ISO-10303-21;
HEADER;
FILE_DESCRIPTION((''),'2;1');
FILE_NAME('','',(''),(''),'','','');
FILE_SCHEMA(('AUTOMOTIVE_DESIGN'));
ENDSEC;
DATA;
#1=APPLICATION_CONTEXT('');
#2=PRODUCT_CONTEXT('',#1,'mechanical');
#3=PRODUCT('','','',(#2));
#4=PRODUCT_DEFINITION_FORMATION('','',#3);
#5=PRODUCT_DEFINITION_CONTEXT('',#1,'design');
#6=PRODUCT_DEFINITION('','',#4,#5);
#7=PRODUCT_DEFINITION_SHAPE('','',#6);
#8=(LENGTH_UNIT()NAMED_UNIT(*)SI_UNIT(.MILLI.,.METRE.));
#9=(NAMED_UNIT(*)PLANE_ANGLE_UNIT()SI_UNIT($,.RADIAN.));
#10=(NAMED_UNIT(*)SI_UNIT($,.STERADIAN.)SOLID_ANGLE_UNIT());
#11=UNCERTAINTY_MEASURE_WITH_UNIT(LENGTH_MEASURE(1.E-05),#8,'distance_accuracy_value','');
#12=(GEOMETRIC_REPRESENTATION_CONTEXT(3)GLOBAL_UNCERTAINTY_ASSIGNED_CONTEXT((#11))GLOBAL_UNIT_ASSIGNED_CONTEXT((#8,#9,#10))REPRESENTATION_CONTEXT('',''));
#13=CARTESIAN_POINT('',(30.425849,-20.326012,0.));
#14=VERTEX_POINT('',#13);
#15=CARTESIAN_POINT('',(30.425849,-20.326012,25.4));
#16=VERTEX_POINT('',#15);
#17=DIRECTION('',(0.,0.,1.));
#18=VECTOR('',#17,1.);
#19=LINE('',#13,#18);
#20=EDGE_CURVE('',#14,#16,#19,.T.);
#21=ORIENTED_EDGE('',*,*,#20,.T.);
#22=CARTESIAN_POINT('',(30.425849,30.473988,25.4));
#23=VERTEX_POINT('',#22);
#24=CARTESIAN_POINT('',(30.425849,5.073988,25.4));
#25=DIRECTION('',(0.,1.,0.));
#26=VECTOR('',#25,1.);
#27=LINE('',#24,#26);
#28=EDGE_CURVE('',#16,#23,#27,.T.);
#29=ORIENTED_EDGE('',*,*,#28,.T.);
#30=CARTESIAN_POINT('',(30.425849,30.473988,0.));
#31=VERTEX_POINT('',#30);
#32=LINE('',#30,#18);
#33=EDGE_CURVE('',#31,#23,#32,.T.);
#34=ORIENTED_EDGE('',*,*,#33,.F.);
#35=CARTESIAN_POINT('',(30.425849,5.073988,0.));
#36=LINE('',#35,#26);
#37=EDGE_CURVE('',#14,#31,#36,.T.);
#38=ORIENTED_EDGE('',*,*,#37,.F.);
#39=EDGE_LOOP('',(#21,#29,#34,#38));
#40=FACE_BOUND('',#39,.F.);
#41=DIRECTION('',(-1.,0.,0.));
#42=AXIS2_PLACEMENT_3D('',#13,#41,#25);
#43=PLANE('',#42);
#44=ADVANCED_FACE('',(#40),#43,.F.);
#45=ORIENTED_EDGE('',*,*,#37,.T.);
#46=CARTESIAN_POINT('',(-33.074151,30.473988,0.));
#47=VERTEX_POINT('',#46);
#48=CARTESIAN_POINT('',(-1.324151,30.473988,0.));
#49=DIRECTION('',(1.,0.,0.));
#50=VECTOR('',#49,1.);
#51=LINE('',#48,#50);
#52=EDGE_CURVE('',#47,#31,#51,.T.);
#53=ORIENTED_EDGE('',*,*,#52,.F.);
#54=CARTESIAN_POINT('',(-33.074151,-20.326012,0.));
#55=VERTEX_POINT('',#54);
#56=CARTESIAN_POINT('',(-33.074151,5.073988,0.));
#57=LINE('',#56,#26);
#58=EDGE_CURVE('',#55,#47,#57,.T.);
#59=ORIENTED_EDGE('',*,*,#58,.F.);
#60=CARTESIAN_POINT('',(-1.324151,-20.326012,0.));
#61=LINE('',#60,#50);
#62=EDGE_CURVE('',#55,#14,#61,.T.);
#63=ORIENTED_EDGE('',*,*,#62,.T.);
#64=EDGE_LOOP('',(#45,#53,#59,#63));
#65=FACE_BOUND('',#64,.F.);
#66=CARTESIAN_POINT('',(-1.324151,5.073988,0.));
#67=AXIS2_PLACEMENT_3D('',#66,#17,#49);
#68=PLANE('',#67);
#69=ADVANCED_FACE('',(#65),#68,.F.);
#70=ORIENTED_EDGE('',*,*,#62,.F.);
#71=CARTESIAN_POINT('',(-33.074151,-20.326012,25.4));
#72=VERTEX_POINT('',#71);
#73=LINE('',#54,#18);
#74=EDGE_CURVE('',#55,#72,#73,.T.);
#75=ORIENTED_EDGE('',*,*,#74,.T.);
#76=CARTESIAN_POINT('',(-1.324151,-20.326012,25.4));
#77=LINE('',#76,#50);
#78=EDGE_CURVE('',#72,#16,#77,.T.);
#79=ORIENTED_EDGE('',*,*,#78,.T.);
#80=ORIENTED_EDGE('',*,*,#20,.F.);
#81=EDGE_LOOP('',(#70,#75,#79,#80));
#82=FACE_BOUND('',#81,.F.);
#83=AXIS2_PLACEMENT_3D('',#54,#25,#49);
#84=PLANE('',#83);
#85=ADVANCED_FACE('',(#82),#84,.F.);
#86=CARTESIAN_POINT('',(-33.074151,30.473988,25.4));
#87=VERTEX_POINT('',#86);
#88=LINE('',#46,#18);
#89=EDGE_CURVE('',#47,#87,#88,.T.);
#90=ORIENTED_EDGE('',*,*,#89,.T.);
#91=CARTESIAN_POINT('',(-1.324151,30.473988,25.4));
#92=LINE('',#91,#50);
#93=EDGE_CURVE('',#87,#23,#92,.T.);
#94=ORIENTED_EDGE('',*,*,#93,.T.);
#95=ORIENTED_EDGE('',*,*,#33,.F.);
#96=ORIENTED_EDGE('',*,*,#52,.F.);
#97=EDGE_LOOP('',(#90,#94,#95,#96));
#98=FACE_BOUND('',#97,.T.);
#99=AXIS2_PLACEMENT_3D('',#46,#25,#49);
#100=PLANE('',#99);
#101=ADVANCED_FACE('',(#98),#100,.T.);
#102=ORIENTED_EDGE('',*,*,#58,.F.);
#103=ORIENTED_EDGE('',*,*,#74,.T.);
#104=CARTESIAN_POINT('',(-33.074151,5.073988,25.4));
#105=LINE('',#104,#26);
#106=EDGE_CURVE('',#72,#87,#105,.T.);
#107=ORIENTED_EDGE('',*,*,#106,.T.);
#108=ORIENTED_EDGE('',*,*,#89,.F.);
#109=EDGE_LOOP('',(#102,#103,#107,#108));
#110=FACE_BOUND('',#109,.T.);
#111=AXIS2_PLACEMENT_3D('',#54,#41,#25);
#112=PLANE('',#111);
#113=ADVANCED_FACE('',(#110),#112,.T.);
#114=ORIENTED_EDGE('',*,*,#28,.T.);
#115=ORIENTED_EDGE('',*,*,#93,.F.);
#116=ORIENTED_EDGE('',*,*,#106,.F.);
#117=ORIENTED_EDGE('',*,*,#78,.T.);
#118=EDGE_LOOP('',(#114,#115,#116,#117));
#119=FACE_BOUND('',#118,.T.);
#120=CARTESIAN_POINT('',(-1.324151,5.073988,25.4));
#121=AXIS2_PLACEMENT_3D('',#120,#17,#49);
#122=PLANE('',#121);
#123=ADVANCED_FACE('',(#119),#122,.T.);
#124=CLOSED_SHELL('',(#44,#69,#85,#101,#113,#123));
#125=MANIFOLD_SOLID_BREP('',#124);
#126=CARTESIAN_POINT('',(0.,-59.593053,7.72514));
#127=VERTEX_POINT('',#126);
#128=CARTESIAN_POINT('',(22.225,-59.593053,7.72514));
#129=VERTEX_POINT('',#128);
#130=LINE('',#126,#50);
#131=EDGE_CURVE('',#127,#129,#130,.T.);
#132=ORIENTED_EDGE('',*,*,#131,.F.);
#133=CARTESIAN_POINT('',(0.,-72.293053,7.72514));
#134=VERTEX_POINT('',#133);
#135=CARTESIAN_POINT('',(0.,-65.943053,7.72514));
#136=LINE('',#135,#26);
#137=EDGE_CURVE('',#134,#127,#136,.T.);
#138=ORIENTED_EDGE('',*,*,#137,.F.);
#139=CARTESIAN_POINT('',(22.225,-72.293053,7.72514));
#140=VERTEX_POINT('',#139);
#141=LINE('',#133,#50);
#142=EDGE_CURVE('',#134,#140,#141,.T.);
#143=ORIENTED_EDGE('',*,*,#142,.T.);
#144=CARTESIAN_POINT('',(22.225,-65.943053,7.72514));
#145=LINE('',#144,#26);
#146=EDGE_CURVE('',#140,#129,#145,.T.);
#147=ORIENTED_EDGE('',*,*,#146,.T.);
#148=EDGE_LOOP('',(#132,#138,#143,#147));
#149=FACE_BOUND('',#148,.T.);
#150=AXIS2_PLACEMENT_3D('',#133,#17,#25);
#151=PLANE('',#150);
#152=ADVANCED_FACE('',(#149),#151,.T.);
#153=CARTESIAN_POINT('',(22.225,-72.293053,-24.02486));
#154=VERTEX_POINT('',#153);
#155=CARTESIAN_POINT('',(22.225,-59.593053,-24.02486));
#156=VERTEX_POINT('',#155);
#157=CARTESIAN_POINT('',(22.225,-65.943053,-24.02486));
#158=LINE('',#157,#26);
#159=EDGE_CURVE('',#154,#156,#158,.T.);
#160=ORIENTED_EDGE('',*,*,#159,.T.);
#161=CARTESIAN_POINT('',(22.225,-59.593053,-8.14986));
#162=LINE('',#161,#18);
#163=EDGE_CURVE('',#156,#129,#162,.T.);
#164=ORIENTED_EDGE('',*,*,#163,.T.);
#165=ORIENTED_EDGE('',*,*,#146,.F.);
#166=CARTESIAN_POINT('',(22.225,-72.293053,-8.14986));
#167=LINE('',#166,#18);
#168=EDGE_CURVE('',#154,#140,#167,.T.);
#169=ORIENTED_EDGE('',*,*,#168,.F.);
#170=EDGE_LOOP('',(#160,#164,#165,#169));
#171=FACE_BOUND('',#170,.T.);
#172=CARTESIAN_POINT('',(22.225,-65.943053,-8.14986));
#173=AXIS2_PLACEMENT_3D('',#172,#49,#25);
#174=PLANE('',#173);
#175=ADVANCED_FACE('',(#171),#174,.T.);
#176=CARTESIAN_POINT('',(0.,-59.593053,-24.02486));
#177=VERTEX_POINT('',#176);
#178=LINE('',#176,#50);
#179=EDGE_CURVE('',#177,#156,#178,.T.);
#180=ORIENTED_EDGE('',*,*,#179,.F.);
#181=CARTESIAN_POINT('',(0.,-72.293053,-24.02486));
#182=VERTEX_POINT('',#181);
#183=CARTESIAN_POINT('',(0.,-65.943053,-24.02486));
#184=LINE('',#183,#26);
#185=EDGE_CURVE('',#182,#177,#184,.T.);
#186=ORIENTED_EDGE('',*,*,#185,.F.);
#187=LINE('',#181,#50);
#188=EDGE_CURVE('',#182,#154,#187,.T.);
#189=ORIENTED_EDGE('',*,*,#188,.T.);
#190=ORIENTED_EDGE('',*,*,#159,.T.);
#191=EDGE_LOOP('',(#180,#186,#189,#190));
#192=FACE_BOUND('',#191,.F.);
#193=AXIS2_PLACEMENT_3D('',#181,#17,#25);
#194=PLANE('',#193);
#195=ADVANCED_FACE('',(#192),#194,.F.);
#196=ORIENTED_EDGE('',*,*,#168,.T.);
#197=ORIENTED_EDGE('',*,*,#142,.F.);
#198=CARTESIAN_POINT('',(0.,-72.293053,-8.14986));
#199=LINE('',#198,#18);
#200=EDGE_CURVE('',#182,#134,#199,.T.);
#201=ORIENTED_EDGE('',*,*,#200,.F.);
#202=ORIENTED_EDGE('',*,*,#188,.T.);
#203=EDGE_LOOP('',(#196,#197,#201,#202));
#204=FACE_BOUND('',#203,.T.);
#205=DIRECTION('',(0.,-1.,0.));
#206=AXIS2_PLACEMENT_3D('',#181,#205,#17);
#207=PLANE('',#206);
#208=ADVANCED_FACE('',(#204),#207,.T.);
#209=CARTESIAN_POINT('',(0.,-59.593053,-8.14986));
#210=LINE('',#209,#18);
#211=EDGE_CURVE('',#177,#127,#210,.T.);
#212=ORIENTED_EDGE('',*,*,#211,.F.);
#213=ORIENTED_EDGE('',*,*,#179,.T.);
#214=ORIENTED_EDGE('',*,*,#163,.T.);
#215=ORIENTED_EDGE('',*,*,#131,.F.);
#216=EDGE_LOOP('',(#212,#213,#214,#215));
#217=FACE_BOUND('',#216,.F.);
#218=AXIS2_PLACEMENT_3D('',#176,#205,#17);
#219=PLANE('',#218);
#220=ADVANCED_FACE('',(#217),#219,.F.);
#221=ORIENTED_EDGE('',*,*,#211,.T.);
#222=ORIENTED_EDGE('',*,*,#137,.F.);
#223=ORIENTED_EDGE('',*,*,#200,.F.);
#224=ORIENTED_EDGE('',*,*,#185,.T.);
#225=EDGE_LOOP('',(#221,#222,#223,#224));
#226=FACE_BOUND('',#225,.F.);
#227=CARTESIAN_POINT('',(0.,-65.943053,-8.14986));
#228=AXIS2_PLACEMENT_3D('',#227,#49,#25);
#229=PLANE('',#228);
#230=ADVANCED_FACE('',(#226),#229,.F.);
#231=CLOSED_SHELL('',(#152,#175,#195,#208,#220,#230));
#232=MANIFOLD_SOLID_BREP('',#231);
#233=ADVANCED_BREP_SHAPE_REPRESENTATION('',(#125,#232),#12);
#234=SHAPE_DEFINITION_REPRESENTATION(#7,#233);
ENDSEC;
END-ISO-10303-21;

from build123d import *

# Parameters (mm, degrees)
F0_W     = 63.5
F0_H     = 50.8
F1_DEPTH = 25.4
F2_W     = 12.7
F2_H     = 31.75
F3_DEPTH = 22.225


# Not quite as in the source:
# - a length typed as a fraction of an inch, garbled in the dataset ("3 / 203.2 mm" for 3/8 in), is restored


with BuildPart() as f1:
    # F0 (on Top) → F1 (new body)
    with BuildSketch(Plane.XY):
        with Locations((-1.3241507113, 5.0739876905)):
            Rectangle(F0_W, F0_H)
    extrude(amount=F1_DEPTH)


with BuildPart() as f3:
    # F2 (on Right) → F3 (new body)
    with BuildSketch(Plane.YZ):
        with Locations((-65.9430525749, -8.1498604931)):
            Rectangle(F2_W, F2_H)
    extrude(amount=F3_DEPTH)


solid = Compound([f1.part, f3.part])
